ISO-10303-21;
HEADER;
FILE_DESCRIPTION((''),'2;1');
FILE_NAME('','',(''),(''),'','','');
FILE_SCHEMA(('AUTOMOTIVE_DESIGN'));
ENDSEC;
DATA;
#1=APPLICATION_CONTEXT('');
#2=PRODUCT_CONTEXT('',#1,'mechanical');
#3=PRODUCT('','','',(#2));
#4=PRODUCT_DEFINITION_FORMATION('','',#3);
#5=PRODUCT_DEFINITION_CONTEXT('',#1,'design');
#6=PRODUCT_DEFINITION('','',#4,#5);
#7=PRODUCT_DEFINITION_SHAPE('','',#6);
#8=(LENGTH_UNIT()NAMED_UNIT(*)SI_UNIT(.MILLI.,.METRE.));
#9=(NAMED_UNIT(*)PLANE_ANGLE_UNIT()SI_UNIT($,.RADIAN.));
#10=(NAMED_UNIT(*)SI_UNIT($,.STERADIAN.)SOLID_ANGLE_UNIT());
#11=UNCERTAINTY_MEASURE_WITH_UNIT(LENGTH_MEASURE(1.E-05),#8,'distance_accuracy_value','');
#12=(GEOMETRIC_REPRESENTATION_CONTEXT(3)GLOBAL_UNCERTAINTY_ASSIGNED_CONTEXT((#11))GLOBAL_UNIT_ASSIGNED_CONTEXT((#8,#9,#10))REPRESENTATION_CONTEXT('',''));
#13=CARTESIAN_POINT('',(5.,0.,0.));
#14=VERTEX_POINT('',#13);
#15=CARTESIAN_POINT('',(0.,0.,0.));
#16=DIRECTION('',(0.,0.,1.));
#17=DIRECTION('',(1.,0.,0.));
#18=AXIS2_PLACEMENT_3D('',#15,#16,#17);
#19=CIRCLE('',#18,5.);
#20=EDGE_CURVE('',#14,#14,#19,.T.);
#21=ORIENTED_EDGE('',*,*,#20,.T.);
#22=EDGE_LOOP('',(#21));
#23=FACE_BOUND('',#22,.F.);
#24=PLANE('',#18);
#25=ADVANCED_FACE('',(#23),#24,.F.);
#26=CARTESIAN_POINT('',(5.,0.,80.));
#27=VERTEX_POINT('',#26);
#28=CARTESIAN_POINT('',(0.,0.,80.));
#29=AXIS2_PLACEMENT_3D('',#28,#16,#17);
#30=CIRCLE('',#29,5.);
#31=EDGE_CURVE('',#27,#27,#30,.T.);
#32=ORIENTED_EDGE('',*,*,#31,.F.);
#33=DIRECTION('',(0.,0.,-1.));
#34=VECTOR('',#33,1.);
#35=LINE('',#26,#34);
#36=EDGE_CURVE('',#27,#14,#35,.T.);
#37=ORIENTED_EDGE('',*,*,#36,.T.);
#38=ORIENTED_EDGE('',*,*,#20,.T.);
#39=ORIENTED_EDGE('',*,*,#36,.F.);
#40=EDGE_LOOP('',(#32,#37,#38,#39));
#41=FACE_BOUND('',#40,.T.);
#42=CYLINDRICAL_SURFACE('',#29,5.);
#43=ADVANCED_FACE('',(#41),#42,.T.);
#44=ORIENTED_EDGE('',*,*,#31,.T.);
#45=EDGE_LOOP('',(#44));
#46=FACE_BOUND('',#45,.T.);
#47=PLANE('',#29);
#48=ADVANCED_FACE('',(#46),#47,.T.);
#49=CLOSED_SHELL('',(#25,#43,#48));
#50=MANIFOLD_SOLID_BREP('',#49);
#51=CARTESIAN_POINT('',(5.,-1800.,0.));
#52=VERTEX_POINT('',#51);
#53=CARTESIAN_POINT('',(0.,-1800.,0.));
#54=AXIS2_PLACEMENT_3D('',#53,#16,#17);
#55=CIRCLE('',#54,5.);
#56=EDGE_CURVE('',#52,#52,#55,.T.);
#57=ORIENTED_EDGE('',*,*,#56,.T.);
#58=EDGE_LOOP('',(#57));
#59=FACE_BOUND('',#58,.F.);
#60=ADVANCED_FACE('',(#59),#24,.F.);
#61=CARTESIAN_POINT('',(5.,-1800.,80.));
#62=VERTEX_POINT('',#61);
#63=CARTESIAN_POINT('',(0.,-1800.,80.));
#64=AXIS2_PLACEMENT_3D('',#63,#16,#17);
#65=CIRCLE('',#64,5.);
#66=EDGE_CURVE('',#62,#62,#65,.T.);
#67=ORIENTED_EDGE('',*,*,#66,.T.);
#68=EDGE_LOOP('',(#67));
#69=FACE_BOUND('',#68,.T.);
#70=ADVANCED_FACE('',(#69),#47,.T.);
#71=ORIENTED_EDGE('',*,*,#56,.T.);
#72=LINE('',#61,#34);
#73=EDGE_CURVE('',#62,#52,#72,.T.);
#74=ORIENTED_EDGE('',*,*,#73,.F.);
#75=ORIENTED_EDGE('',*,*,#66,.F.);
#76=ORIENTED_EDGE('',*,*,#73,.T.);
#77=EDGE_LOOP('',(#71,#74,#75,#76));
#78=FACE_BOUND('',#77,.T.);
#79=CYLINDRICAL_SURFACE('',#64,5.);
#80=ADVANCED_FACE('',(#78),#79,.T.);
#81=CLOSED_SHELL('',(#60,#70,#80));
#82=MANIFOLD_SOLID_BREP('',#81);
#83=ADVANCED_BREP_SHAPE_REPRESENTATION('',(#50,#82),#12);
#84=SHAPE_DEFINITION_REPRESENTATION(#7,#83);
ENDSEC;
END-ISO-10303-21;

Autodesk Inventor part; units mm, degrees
ref_plane "YZ Plane" through (0, 0, 0) normal (1, 0, 0) x (0, 1, 0)
ref_plane "XZ Plane" through (0, 0, 0) normal (0, 1, 0) x (-1, 0, 0)
sketch "Sketch1" plane through (0, 0, 0) normal (0, 0, 1) x (1, 0, 0)
  line L0 (0, 0) -> (0, -1800) construction
  line L1 (-25, 0) -> (-25, -1800)
  line L2 (25, -1800) -> (25, 0)
  arc A0 (25, 0) -> (-25, 0) centre (0, 0) ccw
  arc A1 (-25, -1800) -> (25, -1800) centre (0, -1800) ccw
  point P0 (0, -900)
  dimension "d0" = 50
  dimension "d1" = 1800
ref_plane "Work Plane1" through (0, 0, 80) normal (0, 0, 1) x (1, 0, 0)
sketch "Sketch2" plane through (0, 0, 80) normal (0, 0, 1) x (1, 0, 0)
  line L0 (-25, 0) -> (-25, -1800) projected
  arc A0 (25, 0) -> (-25, 0) centre (0, 0) ccw projected
  line L1 (25, -1800) -> (25, 0) projected
  arc A1 (-25, -1800) -> (25, -1800) centre (0, -1800) ccw projected
  circle A2 centre (0, 0) radius 5
  circle A3 centre (0, -1800) radius 5
  dimension "d3" = 10
  dimension "d4" = 10
extrude "Extrusion1" add sketch "Sketch2" against normal up to surface (80 mm away) contours A2 | A3
properties part number "armj3" material "Aluminum 6061"
